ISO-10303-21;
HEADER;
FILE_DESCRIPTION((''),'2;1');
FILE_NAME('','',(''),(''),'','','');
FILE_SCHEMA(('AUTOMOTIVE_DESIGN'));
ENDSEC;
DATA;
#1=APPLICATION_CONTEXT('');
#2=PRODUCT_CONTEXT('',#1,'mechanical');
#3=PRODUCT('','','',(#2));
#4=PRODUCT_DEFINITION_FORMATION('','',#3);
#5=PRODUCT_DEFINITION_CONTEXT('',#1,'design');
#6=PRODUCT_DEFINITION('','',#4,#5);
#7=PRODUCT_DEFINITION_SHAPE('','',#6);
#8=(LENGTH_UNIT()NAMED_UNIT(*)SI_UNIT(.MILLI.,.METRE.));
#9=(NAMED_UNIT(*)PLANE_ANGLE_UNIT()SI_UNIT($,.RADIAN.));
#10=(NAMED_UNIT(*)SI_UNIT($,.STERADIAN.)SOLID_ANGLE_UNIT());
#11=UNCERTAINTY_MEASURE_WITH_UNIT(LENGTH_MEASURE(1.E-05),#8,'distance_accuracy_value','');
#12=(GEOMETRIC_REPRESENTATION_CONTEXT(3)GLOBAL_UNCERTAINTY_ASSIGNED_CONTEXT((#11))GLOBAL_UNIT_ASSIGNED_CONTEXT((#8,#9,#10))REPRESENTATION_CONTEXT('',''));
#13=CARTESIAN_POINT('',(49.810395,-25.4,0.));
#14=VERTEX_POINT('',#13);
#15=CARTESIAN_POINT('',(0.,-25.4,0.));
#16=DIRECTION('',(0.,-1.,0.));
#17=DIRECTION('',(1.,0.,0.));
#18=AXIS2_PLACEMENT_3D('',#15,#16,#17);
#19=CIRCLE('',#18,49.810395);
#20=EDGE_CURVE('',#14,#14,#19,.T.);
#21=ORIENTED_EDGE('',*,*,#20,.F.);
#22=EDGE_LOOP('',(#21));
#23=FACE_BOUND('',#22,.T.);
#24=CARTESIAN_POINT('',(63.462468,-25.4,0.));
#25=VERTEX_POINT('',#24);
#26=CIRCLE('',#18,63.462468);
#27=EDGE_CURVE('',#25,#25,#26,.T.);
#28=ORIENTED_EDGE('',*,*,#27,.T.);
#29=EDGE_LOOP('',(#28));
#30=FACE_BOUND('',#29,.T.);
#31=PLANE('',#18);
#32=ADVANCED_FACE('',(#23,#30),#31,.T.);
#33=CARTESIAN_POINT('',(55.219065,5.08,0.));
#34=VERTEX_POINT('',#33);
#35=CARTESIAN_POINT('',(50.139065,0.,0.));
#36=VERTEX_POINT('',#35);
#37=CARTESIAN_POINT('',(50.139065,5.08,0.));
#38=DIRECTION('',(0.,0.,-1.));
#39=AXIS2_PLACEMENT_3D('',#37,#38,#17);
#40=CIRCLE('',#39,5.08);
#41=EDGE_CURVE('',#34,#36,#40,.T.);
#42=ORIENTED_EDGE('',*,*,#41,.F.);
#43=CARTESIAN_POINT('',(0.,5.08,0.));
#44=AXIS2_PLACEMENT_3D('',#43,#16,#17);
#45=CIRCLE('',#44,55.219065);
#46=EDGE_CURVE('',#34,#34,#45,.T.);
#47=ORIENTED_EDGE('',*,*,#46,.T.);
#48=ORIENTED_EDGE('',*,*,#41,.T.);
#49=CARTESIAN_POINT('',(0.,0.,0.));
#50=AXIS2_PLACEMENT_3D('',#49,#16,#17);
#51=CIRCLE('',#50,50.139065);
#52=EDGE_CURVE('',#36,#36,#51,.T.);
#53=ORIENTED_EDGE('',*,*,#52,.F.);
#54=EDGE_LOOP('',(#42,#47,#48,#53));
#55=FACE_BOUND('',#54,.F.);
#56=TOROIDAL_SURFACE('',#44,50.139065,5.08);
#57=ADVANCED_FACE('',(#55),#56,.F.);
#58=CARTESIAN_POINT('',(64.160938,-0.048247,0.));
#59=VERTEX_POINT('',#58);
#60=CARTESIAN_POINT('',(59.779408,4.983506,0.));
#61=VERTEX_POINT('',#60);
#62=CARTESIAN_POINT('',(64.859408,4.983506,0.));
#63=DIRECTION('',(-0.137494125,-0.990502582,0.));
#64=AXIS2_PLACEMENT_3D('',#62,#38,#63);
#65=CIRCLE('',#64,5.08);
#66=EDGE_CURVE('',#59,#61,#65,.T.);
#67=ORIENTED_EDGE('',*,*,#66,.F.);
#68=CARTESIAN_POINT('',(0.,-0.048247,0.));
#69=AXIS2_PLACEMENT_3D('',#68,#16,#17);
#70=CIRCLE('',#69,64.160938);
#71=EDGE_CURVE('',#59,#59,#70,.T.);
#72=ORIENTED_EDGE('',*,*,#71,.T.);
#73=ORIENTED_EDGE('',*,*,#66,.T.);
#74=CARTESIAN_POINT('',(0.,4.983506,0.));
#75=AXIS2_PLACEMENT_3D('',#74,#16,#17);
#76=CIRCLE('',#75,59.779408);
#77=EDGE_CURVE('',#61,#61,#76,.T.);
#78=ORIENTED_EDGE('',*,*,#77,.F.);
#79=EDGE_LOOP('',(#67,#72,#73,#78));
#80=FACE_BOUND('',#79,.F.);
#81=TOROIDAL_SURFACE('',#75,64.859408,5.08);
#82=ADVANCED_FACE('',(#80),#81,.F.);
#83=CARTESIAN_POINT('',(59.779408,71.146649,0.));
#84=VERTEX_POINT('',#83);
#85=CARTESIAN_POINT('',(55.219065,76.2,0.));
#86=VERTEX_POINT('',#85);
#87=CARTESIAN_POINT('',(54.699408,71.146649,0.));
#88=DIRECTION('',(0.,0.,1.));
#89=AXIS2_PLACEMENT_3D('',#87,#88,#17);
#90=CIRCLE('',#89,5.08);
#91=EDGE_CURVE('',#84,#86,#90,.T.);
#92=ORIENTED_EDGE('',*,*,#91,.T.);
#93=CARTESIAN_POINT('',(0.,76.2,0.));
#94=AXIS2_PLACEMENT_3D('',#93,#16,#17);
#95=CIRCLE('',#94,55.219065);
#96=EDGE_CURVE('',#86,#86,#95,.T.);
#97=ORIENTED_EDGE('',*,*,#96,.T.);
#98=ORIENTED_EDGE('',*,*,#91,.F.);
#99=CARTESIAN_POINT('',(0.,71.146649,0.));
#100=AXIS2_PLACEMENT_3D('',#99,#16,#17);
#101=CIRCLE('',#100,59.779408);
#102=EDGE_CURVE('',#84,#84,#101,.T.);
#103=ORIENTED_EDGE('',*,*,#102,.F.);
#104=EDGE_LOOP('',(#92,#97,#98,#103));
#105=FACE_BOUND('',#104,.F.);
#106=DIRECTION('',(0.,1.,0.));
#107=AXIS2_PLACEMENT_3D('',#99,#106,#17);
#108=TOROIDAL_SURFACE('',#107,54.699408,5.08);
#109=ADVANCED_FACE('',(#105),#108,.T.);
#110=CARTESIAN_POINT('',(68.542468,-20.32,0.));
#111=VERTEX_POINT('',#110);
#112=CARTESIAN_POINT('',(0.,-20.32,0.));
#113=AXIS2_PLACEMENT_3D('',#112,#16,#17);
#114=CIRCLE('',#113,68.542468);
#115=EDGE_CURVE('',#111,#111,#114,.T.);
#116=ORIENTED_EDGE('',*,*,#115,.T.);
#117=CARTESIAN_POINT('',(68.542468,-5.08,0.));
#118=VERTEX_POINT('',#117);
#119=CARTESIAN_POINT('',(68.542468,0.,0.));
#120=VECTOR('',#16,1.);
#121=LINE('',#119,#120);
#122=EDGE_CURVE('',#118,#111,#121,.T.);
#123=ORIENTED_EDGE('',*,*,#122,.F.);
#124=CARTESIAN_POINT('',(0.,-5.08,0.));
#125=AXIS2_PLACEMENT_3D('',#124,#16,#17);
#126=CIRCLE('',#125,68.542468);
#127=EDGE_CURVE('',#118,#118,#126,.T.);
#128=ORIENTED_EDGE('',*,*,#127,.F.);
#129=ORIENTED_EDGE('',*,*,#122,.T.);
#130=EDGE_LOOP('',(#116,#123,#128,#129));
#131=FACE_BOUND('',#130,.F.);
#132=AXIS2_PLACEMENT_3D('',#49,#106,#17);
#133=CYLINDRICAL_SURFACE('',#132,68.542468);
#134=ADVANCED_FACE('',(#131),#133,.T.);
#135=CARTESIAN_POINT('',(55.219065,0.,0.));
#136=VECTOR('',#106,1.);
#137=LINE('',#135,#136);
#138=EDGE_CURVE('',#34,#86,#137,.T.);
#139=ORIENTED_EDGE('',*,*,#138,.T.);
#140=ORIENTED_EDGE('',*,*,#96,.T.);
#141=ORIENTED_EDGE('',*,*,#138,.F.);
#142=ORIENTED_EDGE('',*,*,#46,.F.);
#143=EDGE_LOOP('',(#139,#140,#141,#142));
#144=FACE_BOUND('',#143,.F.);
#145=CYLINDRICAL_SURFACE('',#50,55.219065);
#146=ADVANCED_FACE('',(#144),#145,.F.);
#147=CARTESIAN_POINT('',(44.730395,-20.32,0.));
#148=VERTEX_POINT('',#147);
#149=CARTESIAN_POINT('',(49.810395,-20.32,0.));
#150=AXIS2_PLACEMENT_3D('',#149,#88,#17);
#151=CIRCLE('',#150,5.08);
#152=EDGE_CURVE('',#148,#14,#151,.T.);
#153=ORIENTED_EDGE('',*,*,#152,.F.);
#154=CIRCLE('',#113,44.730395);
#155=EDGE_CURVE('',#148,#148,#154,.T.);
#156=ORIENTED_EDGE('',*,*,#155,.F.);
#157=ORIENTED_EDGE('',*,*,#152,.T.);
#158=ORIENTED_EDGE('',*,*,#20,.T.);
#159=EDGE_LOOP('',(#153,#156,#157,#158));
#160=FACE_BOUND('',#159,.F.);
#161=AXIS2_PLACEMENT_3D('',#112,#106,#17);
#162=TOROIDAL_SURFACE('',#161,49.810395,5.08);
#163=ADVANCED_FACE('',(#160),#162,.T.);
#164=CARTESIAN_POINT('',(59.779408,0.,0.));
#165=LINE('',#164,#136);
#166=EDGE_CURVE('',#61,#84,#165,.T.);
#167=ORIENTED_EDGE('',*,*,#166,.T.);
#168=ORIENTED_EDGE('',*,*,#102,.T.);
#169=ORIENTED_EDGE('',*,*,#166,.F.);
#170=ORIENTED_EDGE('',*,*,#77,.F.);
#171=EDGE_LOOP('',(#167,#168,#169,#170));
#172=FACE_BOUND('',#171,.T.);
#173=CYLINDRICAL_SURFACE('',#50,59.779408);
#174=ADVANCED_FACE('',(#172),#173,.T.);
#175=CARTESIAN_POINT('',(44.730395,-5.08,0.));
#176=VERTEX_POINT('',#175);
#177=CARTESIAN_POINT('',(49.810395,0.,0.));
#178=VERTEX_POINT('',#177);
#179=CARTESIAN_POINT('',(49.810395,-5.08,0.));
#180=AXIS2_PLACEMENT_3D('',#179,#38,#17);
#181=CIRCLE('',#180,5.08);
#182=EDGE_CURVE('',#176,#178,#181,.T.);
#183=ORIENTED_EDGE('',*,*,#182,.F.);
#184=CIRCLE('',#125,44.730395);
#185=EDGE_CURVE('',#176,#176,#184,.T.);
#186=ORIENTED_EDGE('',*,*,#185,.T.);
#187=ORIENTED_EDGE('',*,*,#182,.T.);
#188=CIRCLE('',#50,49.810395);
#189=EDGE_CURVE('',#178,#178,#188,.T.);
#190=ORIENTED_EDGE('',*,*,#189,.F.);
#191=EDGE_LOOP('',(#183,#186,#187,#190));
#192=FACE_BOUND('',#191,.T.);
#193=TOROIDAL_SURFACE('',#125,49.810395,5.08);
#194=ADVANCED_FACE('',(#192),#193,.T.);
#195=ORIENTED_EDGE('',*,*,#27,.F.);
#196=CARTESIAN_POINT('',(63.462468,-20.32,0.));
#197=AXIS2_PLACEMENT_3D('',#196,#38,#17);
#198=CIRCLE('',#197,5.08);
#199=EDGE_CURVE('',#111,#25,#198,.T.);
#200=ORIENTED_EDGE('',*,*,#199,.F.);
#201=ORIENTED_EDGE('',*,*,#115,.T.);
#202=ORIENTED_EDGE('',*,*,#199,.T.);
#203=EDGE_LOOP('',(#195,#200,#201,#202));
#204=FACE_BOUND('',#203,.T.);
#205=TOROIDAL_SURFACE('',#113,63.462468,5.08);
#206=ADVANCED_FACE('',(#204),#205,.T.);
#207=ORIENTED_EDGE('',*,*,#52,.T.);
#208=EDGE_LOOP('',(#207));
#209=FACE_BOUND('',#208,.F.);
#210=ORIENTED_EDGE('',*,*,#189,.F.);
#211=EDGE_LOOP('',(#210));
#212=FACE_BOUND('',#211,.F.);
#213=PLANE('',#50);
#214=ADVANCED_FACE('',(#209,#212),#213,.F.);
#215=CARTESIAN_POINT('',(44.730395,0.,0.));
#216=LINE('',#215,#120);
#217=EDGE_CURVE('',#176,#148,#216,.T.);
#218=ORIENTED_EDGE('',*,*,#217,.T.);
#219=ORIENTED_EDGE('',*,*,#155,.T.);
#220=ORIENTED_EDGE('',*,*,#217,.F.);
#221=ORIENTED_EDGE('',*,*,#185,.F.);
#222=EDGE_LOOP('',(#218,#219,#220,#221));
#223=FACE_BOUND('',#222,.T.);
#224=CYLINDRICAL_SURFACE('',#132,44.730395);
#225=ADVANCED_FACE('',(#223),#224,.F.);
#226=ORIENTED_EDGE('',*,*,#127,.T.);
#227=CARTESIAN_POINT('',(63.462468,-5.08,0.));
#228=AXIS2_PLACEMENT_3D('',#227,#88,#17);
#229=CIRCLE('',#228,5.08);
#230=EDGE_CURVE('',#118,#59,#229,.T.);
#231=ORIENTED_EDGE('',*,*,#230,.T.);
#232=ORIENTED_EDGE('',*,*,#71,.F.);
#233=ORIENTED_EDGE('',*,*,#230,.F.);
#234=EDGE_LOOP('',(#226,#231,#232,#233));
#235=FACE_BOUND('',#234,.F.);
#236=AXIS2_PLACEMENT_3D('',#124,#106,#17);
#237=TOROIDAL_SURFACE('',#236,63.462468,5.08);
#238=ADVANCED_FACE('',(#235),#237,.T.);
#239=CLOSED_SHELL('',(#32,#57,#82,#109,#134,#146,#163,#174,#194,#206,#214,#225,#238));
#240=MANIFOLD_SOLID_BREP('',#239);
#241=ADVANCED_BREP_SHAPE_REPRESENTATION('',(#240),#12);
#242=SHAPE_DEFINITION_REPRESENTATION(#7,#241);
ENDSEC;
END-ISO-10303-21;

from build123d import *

# Parameters (mm, degrees)
F0_R     = 68.542467708
F0_R_2   = 44.7303954882
F1_DEPTH = 25.4
F2_R     = 5.08
F3_R     = 59.7794080135
F3_R_2   = 55.2190650749
F4_DEPTH = 76.2


# Not quite as in the source:
# - a fillet or chamfer that OpenCascade refuses, or shapes differently, is made with other operations: its cross-section is extruded or revolved along the edge and cut away or added


with BuildPart() as f1:
    # F0 (on Front) → F1 (new body)
    with BuildSketch(Plane.XZ):
        Circle(F0_R)
        Circle(F0_R_2, mode=Mode.SUBTRACT)
    extrude(amount=F1_DEPTH)

    # F2
    f2_edges = [f1.edges().sort_by_distance(p)[0] for p in [
        (-68.542468, -25.4, 0),
        (68.542468, -12.7, 0),
        (-68.542468, 0, 0),
        (-44.730395, -25.4, 0),
        (44.730395, -12.7, 0),
        (-44.730395, 0, 0),
    ]]
    fillet(f2_edges, radius=F2_R)

    # F3 (on Front) → F4 (join)
    with BuildSketch(Plane.XZ):
        Circle(F3_R)
        Circle(F3_R_2, mode=Mode.SUBTRACT)
    extrude(amount=-F4_DEPTH)

    # F5: fillet of radius 5.08 on 3 edges, made by hand

    # F5_s1 → F5_t2 (revolve)
    with BuildSketch(Plane.XY):
        with BuildLine():
            ThreePointArc((64.1609378607, -0.0482468815), (61.028309713, 1.6474777881), (59.7794080135, 4.983506237))
            Line((59.7794080135, 4.983506237), (59.2714080135, 4.983506237))
            Line((59.2714080135, 4.983506237), (59.2714080135, 0))
            Line((59.2714080135, 0), (59.7794080135, -0.508))
            ThreePointArc((59.7794080135, -0.508), (63.462467708, -0.508), (64.0910908454, -0.5514221933))
            Line((64.0910908454, -0.5514221933), (64.1609378607, -0.0482468815))
        make_face()
    revolve(axis=Axis((0, 0, 0), (0, -1, 0)))

    # F5_s3 → F5_t4 (revolve)
    with BuildSketch(Plane.XY):
        with BuildLine():
            ThreePointArc((55.2190650749, 5.08), (53.7311675233, 1.4878975516), (50.1390650749, 0))
            Line((50.1390650749, 0), (55.2190650749, 0))
            Line((55.2190650749, 0), (55.2190650749, 5.08))
        make_face()
    revolve(axis=Axis((0, 0, 0), (0, -1, 0)))

    # F5_s5 → F5_t6 (revolve, cut)
    with BuildSketch(Plane.XY):
        with BuildLine():
            ThreePointArc((59.7794080135, 71.1466489793), (58.4707643923, 74.550069474), (55.2190650749, 76.2))
            Line((55.2190650749, 76.2), (59.7794080135, 76.2))
            Line((59.7794080135, 76.2), (59.7794080135, 71.1466489793))
        make_face()
    revolve(axis=Axis((0, 76.2, 0), (0, -1, 0)), mode=Mode.SUBTRACT)


solid = f1.part
